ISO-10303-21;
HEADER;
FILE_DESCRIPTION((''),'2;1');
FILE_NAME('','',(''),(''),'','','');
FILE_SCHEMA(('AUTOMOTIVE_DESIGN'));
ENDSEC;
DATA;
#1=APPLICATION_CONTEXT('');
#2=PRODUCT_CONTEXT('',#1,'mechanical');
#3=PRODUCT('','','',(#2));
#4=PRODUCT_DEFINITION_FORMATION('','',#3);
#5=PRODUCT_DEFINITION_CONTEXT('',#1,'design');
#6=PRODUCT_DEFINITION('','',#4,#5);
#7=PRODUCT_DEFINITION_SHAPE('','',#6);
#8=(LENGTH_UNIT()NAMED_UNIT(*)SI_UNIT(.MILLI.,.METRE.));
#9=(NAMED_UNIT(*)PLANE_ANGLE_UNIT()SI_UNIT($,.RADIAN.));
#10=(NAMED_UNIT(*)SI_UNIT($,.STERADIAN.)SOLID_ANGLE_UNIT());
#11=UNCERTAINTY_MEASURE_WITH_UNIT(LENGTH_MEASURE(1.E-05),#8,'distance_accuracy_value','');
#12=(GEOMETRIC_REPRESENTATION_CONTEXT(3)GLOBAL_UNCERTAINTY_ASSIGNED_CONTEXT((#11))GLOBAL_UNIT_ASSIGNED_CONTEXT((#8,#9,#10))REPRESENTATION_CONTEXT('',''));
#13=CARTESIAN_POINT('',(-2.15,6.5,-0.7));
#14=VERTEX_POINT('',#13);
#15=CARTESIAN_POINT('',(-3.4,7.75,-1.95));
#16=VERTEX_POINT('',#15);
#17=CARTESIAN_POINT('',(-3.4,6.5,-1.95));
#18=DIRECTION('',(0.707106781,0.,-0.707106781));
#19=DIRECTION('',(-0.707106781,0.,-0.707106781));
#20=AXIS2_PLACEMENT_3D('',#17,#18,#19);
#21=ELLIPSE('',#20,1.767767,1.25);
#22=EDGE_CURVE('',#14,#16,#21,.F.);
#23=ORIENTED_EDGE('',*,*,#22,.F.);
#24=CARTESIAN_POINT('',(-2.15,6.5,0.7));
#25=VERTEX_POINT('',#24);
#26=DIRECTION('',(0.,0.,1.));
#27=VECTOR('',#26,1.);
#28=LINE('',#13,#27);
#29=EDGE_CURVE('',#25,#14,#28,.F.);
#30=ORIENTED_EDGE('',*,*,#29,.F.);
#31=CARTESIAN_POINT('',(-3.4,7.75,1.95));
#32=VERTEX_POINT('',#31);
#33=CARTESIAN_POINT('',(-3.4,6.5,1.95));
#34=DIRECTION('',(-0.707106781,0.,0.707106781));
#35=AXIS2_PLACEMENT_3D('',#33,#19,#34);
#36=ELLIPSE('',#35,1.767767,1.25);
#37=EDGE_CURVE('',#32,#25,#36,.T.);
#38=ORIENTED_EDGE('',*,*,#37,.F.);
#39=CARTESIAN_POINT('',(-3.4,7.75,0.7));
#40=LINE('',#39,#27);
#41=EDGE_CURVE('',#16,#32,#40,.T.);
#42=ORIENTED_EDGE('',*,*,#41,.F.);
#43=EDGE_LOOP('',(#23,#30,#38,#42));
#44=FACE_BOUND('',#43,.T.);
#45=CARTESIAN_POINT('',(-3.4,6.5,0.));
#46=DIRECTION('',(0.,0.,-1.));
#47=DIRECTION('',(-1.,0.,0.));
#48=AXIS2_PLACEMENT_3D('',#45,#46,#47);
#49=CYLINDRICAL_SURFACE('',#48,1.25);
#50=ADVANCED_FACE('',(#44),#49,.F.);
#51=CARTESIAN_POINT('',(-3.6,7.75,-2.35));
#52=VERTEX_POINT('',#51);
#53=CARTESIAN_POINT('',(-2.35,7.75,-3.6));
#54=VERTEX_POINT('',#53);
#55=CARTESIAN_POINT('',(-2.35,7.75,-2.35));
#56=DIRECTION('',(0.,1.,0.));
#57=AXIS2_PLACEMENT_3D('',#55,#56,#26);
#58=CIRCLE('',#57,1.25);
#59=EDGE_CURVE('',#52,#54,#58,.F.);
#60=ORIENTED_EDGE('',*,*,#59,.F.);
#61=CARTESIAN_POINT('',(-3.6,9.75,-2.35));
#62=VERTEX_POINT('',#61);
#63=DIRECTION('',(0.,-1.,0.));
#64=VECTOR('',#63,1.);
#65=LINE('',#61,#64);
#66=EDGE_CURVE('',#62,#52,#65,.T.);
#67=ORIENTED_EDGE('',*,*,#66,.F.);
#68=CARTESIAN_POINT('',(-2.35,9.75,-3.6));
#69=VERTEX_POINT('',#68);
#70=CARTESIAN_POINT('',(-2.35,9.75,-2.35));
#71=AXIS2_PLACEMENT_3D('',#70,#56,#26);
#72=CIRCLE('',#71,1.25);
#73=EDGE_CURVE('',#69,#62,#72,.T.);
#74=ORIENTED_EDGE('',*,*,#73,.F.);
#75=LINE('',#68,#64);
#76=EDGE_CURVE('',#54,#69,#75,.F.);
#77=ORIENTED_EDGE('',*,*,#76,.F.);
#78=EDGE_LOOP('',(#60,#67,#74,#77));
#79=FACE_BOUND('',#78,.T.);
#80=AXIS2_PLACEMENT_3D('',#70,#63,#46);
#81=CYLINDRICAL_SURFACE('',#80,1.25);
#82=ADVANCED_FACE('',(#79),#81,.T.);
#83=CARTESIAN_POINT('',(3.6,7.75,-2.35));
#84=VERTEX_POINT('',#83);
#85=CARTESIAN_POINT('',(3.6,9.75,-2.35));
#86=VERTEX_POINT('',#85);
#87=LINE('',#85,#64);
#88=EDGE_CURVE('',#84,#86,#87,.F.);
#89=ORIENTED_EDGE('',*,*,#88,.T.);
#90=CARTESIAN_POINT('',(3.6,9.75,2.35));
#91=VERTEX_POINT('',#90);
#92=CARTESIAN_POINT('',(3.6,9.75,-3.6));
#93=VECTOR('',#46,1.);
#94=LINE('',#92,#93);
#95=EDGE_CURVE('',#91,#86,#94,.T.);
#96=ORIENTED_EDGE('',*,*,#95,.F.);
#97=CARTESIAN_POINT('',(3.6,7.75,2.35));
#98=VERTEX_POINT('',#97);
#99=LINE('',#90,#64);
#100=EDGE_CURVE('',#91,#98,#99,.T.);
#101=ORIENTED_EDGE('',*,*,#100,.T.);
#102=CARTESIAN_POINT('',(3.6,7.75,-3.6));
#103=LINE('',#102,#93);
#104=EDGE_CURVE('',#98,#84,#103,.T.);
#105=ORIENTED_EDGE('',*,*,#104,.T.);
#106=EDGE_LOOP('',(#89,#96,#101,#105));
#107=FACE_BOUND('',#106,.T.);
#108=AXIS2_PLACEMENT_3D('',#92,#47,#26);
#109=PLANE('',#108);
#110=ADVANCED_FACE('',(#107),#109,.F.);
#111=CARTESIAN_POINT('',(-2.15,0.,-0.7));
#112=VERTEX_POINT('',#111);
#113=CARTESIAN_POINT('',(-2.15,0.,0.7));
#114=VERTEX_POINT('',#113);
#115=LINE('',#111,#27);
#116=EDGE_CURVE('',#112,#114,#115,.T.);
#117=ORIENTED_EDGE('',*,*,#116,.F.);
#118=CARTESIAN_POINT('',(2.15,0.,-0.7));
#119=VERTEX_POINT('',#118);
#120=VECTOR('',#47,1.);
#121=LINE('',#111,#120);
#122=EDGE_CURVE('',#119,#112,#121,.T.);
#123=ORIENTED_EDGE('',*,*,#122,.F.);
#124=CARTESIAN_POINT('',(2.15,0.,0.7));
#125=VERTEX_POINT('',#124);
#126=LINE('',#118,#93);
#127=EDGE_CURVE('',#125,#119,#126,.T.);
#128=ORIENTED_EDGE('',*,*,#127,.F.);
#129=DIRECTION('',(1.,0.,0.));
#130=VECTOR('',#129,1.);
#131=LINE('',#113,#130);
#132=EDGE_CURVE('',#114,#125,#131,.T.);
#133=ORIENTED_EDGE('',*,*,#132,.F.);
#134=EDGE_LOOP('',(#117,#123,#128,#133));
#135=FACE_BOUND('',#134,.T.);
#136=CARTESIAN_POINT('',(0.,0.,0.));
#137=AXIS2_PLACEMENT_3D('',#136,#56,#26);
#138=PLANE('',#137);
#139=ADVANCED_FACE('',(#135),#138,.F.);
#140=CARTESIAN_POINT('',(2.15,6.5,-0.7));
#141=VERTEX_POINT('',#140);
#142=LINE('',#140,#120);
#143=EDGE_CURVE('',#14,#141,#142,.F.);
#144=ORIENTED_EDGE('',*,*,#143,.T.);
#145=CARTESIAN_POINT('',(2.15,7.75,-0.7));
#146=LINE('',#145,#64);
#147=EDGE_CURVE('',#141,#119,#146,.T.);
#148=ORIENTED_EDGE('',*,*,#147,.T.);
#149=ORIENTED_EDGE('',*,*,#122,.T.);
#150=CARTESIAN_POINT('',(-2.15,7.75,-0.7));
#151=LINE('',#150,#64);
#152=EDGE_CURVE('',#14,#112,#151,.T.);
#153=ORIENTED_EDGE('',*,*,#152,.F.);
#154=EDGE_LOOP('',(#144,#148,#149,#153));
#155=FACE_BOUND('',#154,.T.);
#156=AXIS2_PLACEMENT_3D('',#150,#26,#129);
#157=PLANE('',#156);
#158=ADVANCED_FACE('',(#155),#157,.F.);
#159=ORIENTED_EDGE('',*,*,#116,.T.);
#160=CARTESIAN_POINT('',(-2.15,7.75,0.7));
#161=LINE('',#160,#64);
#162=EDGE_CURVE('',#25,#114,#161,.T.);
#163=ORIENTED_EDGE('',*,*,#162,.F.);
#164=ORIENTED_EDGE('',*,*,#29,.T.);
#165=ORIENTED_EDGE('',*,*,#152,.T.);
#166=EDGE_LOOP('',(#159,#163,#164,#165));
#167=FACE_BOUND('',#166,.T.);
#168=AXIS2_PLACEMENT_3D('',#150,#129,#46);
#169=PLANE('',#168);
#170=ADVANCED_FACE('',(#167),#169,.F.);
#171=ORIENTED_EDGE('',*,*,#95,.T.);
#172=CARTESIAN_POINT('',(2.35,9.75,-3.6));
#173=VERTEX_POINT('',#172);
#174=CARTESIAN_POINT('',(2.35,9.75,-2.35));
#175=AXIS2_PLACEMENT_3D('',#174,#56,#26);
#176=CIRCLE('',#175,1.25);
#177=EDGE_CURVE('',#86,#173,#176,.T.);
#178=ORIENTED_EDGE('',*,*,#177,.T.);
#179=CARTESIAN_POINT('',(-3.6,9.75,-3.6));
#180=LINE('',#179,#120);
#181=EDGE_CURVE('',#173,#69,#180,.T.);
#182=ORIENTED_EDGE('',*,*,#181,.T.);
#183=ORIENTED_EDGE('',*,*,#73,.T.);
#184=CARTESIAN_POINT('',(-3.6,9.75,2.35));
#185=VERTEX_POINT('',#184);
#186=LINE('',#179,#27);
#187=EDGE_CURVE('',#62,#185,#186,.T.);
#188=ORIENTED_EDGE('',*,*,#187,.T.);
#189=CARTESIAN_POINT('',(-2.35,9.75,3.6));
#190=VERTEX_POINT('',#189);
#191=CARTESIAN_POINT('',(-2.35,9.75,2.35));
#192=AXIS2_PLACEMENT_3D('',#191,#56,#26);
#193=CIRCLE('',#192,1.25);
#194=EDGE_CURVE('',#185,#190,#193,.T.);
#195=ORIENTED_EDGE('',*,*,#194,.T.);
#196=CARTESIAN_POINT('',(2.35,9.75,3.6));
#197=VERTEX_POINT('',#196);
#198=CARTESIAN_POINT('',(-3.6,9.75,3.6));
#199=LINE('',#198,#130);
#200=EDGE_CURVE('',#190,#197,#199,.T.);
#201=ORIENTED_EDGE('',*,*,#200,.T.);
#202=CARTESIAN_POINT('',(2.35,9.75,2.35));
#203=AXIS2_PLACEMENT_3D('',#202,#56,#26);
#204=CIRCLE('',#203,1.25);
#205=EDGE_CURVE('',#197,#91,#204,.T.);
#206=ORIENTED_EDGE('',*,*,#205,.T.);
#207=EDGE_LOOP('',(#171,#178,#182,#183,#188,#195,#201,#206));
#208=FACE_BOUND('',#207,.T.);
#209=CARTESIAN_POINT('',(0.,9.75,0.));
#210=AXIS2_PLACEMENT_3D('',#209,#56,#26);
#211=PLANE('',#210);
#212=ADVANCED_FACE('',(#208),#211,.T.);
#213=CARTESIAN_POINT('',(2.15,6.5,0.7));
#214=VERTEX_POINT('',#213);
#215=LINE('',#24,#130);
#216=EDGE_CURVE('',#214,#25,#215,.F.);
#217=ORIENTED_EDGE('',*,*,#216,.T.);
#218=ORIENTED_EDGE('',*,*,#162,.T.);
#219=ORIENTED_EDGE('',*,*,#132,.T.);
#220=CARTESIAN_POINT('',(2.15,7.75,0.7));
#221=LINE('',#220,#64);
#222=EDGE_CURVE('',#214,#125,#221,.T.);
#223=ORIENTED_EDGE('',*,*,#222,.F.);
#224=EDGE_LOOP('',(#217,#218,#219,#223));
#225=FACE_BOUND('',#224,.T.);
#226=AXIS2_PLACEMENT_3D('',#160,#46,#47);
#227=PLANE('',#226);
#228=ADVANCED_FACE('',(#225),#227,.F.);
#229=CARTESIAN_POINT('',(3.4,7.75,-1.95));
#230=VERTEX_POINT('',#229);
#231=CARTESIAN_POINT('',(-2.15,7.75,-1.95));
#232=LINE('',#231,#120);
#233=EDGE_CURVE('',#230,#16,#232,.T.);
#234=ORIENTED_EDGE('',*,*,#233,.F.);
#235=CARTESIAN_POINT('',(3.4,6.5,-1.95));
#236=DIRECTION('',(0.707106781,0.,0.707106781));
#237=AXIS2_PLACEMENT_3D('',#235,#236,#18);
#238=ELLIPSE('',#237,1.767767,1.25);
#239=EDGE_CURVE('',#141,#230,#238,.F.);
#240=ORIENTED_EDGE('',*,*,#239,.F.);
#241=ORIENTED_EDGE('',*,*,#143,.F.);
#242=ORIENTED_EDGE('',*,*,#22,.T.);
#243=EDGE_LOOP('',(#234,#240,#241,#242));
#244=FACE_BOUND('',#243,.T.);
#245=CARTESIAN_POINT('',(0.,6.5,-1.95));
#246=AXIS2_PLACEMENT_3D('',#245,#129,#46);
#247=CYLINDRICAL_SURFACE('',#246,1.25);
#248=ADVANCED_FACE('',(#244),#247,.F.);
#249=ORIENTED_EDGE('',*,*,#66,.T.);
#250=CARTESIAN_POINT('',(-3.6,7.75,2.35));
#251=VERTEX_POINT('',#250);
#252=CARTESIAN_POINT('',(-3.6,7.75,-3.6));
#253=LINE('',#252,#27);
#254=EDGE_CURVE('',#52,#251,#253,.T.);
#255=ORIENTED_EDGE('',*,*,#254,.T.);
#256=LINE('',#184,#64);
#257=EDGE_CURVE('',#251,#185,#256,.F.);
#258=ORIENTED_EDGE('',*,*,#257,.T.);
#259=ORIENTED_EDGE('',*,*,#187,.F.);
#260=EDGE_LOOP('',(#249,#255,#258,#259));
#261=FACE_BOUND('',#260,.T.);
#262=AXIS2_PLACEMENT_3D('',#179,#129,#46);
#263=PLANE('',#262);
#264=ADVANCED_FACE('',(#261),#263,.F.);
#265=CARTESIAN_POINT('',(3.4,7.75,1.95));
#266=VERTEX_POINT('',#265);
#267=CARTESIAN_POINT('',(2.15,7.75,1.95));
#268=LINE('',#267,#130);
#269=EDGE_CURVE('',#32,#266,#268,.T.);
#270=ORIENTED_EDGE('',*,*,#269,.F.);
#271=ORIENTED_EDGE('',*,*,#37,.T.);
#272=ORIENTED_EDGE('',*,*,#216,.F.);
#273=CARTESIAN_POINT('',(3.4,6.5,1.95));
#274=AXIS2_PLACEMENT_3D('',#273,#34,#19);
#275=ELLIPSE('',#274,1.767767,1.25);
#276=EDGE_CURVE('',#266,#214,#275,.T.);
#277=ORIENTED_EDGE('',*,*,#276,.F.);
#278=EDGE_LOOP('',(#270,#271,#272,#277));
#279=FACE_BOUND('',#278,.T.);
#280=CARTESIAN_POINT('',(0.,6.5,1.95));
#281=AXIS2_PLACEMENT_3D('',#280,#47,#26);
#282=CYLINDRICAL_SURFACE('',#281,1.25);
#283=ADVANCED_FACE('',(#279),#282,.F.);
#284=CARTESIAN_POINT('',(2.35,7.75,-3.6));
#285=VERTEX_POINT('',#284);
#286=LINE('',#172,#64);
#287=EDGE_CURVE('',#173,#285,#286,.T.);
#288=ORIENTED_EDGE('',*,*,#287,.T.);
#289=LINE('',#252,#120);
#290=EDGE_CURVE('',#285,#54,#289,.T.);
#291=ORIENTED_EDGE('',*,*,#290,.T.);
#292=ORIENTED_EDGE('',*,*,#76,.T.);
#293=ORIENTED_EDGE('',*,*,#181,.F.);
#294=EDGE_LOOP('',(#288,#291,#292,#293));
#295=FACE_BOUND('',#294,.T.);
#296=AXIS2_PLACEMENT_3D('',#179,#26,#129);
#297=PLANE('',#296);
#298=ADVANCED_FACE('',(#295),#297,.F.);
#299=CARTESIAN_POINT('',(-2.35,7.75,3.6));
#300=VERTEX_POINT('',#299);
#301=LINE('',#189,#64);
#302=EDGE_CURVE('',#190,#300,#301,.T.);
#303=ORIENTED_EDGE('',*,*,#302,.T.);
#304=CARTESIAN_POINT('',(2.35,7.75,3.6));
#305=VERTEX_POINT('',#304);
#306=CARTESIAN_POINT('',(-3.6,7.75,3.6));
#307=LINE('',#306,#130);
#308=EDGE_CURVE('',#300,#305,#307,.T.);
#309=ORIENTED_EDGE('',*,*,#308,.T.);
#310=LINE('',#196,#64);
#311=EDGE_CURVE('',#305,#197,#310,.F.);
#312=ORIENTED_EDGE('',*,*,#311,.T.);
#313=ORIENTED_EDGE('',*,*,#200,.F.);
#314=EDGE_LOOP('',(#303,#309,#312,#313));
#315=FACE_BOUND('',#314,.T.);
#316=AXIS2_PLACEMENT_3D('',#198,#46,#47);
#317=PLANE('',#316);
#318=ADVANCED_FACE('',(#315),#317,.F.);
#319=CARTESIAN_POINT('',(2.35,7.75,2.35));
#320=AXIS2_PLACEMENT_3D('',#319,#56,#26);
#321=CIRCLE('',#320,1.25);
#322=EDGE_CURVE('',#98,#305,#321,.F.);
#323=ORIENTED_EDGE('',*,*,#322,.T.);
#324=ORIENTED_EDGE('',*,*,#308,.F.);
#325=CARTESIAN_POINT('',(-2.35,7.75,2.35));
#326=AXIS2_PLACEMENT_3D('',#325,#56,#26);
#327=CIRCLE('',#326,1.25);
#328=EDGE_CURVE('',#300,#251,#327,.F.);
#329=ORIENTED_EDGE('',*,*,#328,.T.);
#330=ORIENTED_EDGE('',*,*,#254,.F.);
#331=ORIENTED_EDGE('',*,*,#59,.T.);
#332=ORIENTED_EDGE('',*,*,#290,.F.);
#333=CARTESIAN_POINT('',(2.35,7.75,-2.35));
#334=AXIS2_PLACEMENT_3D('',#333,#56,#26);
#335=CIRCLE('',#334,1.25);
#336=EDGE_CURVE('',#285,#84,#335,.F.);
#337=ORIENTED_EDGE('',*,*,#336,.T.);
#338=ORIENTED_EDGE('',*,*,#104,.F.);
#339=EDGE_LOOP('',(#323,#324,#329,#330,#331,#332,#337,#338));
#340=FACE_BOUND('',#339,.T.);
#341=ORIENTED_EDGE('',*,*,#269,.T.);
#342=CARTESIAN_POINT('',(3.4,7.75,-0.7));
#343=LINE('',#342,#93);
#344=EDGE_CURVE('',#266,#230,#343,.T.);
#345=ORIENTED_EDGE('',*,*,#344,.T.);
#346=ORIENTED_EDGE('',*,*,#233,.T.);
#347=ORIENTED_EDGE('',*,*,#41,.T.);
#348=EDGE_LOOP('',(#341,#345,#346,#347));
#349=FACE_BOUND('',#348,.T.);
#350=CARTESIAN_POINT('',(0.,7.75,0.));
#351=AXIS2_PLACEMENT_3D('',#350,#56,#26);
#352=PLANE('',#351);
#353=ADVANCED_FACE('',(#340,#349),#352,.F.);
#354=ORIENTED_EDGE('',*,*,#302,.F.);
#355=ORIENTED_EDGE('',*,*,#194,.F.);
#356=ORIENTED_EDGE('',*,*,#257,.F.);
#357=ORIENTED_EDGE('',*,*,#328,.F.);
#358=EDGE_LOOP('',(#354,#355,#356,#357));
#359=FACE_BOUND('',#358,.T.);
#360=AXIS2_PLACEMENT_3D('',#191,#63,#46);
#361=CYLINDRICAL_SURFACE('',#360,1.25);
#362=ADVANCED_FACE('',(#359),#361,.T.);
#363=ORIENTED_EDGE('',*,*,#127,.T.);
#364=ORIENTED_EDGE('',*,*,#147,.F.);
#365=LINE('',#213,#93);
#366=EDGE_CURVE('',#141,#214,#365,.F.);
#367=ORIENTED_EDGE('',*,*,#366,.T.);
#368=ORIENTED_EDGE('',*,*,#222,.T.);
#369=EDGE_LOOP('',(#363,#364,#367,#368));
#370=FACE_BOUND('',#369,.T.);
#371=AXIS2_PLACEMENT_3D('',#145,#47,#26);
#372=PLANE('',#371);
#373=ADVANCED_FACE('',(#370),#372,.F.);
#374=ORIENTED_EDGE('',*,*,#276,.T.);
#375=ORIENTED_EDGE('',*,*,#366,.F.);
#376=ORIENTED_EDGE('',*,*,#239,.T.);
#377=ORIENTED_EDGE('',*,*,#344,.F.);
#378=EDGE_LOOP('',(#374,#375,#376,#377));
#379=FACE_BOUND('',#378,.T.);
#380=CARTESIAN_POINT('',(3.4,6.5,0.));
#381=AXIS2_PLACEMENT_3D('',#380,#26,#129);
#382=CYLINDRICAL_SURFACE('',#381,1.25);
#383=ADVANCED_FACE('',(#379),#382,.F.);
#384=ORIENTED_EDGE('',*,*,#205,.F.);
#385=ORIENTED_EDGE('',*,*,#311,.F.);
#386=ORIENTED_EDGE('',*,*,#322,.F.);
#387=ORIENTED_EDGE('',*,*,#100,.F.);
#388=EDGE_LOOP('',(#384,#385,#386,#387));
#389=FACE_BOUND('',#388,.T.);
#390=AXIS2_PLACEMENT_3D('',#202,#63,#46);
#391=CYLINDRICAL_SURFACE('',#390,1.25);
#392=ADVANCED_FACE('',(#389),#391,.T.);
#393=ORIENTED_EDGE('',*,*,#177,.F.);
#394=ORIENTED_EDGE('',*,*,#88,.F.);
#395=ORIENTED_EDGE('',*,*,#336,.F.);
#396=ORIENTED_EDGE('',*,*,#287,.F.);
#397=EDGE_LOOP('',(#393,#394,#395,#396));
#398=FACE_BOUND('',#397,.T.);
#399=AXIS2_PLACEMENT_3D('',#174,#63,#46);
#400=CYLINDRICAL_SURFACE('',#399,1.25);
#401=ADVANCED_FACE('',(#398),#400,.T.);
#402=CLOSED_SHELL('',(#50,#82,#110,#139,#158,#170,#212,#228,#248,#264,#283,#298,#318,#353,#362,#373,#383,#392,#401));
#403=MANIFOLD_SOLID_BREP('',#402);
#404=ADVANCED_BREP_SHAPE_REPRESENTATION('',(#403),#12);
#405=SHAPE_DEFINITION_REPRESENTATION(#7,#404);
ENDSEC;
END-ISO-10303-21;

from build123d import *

# Parameters (mm, degrees)
SKETCH1_W           = 4.3
SKETCH1_H           = 1.399999994
BOSS_EXTRUDE1_DEPTH = 7.75
SKETCH2_W           = 7.2
SKETCH2_H           = 7.2
BOSS_EXTRUDE2_DEPTH = 2
FILLET1_R           = 1.25


with BuildPart() as part:
    # Sketch1 → Boss-Extrude1 (new body)
    with BuildSketch(Plane(origin=(0, 0, 0), x_dir=(1, 0, 0), z_dir=(0, 1, 0))):
        Rectangle(SKETCH1_W, SKETCH1_H)
    extrude(amount=BOSS_EXTRUDE1_DEPTH)

    # Sketch2 → Boss-Extrude2 (add)
    with BuildSketch(Plane(origin=(0, 7.75, 0), x_dir=(1, 0, 0), z_dir=(0, 1, 0))):
        Rectangle(SKETCH2_W, SKETCH2_H)
    extrude(amount=BOSS_EXTRUDE2_DEPTH)

    # Fillet1
    fillet1_edges = [part.edges().sort_by_distance(p)[0] for p in [
        (2.15, 7.75, 0),
        (0, 7.75, -0.699999997),
        (-2.15, 7.75, 0),
        (0, 7.75, 0.699999997),
        (3.6, 8.75, -3.6),
        (3.6, 8.75, 3.6),
        (-3.6, 8.75, 3.6),
        (-3.6, 8.75, -3.6),
    ]]
    fillet(fillet1_edges, radius=FILLET1_R)


solid = part.part
